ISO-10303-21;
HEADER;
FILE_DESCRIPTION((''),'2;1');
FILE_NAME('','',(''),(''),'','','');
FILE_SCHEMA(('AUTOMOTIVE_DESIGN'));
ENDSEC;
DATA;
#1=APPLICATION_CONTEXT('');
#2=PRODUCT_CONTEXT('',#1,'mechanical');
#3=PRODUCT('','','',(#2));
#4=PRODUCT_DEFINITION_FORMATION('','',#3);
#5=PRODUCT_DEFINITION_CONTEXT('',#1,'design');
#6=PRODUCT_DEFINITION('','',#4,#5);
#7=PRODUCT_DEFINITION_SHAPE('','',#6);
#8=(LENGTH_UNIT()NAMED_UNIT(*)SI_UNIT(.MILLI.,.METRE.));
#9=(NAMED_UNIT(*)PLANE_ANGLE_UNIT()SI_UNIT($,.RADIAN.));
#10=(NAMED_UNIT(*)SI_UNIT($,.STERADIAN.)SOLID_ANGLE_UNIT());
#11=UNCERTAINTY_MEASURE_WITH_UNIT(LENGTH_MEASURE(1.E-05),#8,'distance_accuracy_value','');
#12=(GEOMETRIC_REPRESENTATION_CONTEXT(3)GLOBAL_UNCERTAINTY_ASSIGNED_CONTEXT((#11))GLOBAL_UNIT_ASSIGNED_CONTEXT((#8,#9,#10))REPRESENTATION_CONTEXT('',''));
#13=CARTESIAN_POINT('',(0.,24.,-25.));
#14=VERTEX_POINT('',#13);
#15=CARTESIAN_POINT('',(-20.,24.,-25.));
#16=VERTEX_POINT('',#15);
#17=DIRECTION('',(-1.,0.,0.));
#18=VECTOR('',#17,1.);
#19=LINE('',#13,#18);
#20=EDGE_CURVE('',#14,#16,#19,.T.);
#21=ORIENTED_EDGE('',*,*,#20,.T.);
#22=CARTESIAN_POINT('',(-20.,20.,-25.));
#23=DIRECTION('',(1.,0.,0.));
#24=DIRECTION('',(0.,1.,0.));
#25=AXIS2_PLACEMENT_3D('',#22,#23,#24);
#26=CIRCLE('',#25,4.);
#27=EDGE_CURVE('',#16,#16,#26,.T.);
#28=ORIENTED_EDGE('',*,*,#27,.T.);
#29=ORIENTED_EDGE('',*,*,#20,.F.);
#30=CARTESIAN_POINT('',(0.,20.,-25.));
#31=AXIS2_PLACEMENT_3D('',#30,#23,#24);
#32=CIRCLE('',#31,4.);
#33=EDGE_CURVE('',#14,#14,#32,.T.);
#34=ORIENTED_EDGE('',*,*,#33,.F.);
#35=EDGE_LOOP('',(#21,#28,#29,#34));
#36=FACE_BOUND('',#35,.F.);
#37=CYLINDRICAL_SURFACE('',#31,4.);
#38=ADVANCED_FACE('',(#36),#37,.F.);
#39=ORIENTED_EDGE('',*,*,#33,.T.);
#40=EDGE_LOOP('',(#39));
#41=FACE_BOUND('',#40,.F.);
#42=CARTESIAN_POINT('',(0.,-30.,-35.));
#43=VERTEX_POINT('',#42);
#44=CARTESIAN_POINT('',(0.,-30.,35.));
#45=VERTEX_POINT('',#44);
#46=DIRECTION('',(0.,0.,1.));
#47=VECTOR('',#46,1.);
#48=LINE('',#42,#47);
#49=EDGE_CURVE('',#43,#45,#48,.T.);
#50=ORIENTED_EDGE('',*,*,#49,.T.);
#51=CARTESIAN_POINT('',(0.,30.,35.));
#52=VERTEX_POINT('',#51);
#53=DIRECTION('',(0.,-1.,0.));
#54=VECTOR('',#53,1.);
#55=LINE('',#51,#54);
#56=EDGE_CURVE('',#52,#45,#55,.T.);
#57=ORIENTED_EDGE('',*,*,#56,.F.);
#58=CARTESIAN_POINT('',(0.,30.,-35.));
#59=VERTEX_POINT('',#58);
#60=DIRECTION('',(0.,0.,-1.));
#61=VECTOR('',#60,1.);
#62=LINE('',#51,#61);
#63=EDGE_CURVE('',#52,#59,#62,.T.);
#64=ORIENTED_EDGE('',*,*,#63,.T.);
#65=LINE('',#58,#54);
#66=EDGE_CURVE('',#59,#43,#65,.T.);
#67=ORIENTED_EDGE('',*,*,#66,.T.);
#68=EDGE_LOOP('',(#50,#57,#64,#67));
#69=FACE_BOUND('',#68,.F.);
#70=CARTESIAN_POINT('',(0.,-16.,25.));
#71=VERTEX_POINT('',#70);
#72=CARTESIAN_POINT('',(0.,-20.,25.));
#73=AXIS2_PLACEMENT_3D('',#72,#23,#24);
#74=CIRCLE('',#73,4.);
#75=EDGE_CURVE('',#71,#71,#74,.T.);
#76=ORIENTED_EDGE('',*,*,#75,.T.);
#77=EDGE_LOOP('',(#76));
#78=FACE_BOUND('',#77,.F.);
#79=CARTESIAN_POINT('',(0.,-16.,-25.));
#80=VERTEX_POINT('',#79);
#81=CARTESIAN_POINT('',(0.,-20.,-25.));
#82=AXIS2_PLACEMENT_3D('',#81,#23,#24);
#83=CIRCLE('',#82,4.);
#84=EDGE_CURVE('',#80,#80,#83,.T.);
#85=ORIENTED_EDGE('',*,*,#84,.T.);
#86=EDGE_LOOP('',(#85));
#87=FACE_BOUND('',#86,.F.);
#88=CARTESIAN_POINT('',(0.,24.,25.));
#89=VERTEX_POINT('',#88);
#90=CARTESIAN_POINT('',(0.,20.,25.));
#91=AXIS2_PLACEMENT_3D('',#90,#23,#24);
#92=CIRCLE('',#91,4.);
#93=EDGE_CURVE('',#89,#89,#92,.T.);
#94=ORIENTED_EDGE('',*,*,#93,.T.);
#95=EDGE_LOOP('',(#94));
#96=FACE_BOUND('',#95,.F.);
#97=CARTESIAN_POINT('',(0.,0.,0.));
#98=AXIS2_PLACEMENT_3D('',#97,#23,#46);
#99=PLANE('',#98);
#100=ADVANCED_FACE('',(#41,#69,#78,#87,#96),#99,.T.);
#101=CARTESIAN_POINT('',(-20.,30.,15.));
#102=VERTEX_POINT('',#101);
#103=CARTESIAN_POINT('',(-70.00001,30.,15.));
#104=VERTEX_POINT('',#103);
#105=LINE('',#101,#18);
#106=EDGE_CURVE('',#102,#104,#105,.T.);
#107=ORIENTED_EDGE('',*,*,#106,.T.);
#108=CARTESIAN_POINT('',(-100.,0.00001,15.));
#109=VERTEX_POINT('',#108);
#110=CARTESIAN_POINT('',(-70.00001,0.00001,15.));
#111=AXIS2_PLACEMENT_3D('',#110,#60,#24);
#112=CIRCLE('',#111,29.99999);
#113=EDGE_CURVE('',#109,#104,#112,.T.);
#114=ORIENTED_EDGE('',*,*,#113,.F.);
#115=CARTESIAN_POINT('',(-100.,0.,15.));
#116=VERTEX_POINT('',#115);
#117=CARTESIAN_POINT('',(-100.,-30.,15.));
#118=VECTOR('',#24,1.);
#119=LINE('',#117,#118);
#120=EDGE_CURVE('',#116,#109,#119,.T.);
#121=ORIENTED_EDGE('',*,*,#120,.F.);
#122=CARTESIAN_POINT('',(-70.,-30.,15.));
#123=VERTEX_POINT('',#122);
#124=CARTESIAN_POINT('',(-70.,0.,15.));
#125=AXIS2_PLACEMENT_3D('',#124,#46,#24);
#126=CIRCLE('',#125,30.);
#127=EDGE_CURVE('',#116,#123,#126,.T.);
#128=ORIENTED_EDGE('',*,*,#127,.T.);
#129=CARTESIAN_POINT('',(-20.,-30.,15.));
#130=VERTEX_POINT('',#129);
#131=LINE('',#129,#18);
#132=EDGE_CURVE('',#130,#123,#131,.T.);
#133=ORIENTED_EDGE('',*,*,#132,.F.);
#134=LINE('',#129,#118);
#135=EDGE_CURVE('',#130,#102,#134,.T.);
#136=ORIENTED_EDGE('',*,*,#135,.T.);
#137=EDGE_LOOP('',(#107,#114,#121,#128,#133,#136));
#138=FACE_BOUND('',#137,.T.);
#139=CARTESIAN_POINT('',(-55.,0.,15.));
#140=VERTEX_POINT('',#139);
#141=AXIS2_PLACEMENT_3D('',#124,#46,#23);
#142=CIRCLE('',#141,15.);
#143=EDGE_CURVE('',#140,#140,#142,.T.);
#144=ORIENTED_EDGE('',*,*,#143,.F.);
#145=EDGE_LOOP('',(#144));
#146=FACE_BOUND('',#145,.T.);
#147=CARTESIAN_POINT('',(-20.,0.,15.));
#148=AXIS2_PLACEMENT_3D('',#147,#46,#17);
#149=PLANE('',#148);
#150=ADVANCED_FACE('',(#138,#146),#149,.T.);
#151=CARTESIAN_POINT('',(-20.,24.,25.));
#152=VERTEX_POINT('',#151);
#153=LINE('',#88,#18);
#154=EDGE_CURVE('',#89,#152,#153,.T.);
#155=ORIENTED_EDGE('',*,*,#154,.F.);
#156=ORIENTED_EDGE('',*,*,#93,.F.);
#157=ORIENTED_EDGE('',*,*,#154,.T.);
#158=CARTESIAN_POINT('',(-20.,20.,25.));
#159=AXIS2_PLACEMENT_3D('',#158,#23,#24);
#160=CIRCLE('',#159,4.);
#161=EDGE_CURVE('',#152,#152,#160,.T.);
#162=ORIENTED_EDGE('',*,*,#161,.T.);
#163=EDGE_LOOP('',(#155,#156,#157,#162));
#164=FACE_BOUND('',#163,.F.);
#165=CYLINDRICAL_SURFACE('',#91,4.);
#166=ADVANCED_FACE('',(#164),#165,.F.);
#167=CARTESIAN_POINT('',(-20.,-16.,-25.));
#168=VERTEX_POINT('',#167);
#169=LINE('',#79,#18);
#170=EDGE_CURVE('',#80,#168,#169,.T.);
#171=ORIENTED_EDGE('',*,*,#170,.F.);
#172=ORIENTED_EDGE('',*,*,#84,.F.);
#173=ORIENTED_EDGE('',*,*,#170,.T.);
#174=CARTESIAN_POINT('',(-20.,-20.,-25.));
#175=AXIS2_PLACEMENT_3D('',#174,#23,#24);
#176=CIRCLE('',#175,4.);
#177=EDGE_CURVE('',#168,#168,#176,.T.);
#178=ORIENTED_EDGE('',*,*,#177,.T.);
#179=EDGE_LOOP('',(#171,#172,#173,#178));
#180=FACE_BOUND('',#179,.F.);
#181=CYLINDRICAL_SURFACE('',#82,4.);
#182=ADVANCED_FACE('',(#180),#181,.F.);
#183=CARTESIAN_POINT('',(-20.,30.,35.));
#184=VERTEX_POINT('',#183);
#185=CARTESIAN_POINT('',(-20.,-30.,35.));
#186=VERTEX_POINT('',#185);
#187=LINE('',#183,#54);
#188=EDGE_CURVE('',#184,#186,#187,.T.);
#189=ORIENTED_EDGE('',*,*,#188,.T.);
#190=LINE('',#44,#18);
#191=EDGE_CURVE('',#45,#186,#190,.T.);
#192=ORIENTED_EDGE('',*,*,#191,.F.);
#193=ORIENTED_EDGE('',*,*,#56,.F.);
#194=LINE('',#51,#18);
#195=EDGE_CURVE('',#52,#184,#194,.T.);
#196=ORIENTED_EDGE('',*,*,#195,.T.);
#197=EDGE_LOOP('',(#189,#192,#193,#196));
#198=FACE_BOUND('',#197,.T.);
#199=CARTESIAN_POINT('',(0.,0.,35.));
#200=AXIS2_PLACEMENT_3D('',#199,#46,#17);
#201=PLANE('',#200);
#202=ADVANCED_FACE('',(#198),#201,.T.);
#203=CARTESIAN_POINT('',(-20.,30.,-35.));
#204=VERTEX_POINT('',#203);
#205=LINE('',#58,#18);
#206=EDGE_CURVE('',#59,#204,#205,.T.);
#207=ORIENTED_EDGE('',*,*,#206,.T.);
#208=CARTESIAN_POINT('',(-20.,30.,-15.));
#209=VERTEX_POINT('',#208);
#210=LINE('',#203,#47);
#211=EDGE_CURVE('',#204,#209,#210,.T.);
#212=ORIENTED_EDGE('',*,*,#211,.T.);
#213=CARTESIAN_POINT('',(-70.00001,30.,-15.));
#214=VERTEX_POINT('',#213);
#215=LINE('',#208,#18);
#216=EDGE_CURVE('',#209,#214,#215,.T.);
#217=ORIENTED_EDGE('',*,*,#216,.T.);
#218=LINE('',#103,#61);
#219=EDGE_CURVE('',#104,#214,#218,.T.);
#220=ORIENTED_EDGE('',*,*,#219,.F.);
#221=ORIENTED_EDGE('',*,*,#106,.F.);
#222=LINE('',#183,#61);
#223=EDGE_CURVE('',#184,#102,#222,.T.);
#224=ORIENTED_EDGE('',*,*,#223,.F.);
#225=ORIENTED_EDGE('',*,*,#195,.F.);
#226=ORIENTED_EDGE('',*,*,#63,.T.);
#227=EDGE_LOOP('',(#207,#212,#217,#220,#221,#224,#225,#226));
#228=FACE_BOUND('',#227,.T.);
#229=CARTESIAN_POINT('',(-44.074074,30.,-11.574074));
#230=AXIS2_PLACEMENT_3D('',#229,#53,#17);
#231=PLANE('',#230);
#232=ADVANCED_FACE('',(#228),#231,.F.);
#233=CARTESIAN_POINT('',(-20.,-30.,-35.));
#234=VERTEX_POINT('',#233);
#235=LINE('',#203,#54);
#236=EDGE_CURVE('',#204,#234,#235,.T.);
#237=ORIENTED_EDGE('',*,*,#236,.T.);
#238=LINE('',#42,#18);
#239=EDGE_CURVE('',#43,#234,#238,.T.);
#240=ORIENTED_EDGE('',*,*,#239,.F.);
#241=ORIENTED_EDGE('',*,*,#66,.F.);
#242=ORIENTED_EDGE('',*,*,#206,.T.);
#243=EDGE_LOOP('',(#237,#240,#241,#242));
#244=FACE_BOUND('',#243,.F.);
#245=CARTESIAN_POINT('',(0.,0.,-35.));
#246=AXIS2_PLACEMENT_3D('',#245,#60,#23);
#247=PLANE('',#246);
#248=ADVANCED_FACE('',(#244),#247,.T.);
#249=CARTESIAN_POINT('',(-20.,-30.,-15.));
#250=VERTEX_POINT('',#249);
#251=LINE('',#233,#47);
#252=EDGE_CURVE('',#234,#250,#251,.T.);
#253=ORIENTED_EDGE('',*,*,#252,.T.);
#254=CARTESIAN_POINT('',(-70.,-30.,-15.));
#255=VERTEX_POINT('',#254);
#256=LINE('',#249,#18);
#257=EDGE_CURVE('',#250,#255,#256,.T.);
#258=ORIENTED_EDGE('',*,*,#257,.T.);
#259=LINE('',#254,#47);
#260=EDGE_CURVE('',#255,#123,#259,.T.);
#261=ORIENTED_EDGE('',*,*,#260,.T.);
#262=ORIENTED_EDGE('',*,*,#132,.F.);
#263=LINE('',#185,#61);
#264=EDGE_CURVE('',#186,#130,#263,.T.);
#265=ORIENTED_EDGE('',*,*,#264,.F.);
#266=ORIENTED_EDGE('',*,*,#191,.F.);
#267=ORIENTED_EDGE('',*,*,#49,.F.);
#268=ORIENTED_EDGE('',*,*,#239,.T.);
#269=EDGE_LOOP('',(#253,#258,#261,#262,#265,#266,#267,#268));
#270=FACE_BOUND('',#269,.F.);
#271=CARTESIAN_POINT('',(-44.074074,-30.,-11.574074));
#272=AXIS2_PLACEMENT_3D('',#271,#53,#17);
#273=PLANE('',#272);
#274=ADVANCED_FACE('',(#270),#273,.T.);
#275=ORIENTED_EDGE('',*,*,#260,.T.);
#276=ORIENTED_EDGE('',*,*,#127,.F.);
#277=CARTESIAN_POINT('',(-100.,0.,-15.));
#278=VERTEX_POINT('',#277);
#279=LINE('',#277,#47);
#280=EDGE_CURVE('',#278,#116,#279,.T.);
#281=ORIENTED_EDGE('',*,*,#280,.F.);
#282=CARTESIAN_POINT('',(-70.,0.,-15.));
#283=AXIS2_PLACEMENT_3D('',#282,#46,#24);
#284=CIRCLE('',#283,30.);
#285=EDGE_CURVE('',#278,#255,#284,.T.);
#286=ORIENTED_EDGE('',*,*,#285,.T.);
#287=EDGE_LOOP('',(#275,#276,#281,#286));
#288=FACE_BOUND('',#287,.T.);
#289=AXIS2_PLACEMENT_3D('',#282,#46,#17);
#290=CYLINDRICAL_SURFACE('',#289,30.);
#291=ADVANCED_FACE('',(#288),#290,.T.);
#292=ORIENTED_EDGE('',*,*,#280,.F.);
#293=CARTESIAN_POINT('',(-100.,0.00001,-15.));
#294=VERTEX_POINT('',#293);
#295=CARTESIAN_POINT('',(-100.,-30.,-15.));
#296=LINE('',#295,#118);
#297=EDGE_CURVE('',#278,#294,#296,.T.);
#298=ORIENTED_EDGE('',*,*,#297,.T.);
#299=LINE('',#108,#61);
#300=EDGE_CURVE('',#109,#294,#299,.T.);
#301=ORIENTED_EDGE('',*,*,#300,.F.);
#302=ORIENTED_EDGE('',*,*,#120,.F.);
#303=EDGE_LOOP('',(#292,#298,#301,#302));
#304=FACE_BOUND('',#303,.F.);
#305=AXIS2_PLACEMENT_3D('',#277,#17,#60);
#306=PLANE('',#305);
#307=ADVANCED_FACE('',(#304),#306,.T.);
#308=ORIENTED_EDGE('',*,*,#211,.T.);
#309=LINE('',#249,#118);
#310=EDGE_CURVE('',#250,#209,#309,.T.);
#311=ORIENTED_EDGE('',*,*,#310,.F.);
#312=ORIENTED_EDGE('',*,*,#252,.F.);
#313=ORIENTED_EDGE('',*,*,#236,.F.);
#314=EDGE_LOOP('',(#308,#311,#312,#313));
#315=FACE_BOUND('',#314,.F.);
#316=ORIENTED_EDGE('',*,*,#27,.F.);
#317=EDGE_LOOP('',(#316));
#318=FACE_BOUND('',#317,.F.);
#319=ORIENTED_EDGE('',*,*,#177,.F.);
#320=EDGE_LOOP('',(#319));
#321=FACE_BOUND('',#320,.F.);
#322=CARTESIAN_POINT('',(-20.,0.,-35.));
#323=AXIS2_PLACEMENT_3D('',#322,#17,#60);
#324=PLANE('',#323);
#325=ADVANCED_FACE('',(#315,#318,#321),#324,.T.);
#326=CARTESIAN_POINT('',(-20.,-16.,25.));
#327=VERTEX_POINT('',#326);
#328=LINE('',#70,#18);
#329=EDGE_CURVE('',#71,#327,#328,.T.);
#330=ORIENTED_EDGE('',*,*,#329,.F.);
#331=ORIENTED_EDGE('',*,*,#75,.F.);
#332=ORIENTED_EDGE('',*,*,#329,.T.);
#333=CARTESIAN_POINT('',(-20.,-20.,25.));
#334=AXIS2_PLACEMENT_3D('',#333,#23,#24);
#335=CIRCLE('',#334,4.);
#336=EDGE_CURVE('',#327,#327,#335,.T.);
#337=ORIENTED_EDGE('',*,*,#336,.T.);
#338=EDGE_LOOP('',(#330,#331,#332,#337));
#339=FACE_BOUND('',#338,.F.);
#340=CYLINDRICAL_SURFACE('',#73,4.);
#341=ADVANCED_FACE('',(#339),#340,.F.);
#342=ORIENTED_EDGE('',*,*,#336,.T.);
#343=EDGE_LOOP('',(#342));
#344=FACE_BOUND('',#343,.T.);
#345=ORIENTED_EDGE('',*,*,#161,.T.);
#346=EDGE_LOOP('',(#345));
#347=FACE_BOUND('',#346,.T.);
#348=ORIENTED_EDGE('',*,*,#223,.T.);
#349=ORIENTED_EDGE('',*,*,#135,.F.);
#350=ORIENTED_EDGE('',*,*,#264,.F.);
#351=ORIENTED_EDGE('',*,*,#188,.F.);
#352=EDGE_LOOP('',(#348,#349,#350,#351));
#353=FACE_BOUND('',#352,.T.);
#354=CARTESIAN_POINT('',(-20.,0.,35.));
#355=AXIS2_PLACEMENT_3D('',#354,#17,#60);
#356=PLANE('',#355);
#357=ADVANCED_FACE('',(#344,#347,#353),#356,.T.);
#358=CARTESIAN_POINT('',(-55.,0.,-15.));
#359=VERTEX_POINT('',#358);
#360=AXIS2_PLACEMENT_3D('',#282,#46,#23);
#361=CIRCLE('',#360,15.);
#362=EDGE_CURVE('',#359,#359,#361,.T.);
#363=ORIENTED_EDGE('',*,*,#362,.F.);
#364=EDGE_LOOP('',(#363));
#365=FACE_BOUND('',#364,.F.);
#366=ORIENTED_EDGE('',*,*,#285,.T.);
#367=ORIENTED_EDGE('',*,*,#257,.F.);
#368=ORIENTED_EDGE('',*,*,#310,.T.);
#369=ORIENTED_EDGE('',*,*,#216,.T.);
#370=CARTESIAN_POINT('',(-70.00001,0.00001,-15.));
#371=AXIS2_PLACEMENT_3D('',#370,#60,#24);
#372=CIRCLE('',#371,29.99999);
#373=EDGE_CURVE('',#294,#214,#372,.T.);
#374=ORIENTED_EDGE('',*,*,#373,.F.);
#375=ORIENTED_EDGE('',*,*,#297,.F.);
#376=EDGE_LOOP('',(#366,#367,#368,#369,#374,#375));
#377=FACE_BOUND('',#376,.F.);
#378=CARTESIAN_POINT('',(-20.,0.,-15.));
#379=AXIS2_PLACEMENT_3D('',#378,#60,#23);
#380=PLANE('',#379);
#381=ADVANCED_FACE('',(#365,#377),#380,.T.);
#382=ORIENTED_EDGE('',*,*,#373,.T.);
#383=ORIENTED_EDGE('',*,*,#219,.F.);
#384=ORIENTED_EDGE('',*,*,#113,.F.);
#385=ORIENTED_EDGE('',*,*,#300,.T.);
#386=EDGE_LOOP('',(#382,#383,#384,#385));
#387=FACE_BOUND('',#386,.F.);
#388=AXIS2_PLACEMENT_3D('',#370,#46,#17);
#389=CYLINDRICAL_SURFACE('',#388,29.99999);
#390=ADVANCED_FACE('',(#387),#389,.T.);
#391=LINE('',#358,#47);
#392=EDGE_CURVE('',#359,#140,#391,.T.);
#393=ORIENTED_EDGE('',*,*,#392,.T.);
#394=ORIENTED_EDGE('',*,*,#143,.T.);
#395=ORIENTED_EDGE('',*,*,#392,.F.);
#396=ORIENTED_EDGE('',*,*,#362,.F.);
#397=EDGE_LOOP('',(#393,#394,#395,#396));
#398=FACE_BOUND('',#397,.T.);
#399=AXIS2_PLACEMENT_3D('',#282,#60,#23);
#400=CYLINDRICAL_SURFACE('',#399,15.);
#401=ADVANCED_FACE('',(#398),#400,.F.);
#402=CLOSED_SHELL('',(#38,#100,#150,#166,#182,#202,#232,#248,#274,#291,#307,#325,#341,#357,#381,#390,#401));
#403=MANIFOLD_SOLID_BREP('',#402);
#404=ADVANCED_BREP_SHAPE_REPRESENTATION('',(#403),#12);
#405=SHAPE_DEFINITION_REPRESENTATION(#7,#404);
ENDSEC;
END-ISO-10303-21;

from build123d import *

# Parameters (mm, degrees)
F1_DEPTH = 30
F2_R     = 30
F3_R     = 29.99999
F4_R     = 15
F5_DEPTH = 25
F7_R     = 4
F8_DEPTH = 20


# Not quite as in the source:
# - a fillet or chamfer is up to 0.001 mm smaller than in the source, because OpenCascade refuses the exact size


with BuildPart() as f1:
    # F0 (on Front) → F1 (new body, symmetric)
    with BuildSketch(Plane.XZ):
        Polygon((-100, 0), (0, 0), (0, 35), (-20, 35), (-20, 15), (-100, 15), align=None)
    extrude(amount=F1_DEPTH, both=True)

    # F2
    f2_edges = [f1.edges().sort_by_distance(p)[0] for p in [
        (-100, -30, 7.5),
    ]]
    fillet(f2_edges, radius=F2_R)

    # F3 (radius 30 in the source; OpenCascade refuses exactly that, so slightly less here)
    f3_edges = [f1.edges().sort_by_distance(p)[0] for p in [
        (-100, 30, 7.5),
    ]]
    fillet(f3_edges, radius=F3_R)

    # F4 (on face) → F5 (cut)
    with BuildSketch(Plane.XY.offset(15)):
        with Locations((-70, 0)):
            Circle(F4_R)
    extrude(amount=-F5_DEPTH, mode=Mode.SUBTRACT)

    # F6: F1 across plane


with BuildPart() as f1_1:
    add(f1.part)
    add(f1.part.mirror(Plane.XY))

    # F7 (on face) → F8 (cut, through all)
    with BuildSketch(Plane.YZ):
        with BuildLine():
            ThreePointArc((-24, -25), (-20, -29), (-16, -25))
            ThreePointArc((-16, -25), (-20, -21), (-24, -25))
        make_face()
        with Locations((-20, 25)):
            Circle(F7_R)
        with Locations((20, -25)):
            Circle(F7_R)
        with Locations((20, 25)):
            Circle(F7_R)
    extrude(amount=-F8_DEPTH, mode=Mode.SUBTRACT)


solid = f1_1.part
